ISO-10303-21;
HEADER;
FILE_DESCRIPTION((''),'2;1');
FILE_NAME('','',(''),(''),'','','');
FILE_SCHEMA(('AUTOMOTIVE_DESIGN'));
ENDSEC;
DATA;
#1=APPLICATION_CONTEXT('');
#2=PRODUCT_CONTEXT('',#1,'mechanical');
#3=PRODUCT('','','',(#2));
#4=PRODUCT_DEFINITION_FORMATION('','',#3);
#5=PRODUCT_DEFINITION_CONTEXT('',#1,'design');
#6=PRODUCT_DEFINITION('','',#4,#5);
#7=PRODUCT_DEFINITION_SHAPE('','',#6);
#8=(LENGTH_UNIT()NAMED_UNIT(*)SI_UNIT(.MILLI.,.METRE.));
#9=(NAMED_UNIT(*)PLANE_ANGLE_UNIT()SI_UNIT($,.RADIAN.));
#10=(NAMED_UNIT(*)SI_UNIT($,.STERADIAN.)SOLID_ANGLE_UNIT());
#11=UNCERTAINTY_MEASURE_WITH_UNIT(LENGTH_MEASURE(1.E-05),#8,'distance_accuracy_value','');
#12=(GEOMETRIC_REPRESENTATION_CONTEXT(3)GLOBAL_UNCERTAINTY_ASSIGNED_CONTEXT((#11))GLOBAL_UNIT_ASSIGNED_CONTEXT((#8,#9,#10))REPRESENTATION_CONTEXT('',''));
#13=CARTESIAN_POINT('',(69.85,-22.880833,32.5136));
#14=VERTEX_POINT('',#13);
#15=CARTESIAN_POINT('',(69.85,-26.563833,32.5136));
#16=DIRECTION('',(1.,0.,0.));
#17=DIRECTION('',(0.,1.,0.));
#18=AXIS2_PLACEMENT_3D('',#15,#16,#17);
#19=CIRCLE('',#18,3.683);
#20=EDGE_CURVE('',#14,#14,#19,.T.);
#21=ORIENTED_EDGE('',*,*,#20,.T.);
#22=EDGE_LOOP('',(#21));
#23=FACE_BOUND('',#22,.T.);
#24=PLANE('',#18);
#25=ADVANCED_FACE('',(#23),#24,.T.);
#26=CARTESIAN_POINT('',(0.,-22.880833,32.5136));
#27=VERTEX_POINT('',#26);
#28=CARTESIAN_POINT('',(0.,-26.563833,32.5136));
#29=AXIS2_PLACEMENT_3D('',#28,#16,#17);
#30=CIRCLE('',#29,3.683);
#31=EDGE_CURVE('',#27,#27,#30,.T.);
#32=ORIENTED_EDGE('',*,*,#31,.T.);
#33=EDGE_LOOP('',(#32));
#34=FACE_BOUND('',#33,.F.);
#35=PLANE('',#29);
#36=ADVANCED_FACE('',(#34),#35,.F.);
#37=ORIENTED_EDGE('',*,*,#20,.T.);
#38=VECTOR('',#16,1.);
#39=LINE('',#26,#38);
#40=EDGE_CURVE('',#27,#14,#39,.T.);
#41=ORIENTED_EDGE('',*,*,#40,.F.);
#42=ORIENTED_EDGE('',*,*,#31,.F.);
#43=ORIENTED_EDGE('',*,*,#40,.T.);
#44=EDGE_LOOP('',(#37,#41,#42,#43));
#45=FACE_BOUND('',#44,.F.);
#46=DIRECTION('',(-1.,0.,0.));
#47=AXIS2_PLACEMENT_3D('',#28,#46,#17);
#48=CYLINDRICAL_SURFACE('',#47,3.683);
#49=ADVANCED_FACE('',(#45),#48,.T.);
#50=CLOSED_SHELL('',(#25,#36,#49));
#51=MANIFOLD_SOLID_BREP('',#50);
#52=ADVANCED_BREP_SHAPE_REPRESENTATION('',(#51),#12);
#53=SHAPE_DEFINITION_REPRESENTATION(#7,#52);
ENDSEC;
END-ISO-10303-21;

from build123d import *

# Parameters (mm, degrees)
F0_R     = 3.683
F1_DEPTH = 69.85


# Not quite as in the source:
# - the program builds the solid bodies; features that only make, move or delete a surface that nothing else refers to are left out


with BuildPart() as f1:
    # F0 (on Right) → F1 (new body)
    with BuildSketch(Plane.YZ):
        with Locations((-26.563832688, 32.5135998428)):
            Circle(F0_R)
    extrude(amount=F1_DEPTH)


solid = f1.part
